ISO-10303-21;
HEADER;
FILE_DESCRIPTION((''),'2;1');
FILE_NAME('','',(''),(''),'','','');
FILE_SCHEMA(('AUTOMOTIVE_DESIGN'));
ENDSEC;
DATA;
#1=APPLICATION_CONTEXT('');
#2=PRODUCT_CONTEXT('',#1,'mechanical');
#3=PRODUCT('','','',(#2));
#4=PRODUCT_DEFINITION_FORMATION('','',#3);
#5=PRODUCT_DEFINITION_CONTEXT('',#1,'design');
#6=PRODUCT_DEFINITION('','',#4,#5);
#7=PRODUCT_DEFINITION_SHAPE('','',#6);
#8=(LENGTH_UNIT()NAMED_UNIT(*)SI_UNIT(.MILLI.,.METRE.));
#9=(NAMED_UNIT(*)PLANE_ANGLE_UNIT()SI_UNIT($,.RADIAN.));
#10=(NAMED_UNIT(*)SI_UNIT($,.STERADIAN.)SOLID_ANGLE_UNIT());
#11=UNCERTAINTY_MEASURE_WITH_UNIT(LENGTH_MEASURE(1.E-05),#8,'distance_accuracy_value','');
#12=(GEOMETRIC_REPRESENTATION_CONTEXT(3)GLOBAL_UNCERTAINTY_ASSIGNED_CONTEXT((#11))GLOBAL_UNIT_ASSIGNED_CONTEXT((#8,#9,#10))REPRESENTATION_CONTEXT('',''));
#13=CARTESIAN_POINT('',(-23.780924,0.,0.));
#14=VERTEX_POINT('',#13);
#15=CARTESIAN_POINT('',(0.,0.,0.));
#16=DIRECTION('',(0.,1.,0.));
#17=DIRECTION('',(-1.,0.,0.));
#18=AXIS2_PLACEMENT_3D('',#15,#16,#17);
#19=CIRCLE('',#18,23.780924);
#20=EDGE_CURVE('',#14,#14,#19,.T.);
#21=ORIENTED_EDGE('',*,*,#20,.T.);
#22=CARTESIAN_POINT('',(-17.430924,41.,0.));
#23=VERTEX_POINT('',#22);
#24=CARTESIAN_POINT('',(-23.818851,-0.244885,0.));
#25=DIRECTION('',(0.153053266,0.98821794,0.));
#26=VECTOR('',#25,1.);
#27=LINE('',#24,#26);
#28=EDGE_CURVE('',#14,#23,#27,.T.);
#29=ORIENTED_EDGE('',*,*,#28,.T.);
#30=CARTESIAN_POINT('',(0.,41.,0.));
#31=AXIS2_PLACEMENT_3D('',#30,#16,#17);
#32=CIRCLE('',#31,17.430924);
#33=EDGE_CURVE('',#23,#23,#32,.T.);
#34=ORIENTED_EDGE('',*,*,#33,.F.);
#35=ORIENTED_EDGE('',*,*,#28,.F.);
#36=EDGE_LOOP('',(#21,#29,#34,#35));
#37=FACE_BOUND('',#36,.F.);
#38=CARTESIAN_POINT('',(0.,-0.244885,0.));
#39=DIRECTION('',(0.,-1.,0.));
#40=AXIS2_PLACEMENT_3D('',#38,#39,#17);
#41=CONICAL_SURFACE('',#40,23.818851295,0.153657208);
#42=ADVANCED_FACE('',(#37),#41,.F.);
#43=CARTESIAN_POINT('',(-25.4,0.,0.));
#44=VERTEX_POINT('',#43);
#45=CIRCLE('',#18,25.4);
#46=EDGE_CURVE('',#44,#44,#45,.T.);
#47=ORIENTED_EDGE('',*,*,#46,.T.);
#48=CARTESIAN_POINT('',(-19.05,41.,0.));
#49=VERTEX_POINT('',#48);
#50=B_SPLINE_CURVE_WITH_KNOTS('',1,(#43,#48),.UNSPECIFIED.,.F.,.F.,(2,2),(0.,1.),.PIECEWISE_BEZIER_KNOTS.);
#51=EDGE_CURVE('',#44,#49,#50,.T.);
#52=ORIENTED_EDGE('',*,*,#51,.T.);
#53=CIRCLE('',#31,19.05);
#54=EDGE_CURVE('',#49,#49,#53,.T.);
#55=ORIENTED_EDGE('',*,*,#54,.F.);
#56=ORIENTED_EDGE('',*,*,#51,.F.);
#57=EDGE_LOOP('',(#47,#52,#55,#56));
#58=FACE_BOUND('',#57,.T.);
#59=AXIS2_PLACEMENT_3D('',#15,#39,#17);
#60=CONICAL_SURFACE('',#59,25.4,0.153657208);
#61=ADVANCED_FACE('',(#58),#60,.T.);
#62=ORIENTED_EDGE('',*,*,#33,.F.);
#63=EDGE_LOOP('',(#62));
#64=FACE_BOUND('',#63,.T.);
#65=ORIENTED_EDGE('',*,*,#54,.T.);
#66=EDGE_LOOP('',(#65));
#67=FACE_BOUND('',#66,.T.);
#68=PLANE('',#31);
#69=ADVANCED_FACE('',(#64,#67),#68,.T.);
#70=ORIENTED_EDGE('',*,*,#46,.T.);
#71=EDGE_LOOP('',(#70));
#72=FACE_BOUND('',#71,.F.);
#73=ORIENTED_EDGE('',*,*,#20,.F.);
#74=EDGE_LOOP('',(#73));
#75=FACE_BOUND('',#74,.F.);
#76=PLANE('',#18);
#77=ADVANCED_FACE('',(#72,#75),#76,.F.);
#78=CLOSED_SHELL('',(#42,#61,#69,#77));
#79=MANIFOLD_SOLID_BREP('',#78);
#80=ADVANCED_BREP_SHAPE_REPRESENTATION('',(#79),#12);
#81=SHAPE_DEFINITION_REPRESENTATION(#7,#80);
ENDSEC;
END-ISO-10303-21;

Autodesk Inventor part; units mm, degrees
ref_plane "YZ Plane" through (0, 0, 0) normal (1, 0, 0) x (0, 1, 0)
ref_plane "XY Plane" through (0, 0, 0) normal (0, 0, 1) x (1, 0, 0)
sketch "Szkic6" plane through (0, 0, 0) normal (0, 1, 0) x (-1, 0, 0)
  circle A0 centre (0, 0) radius 25.4
  dimension "d33" = 50.8
ref_plane "Płaszczyzna konstrukcyjna1" through (0, 41, 0) normal (0, 1, 0) x (-1, 0, 0)
sketch "Szkic7" plane through (0, 41, 0) normal (0, 1, 0) x (-1, 0, 0)
  circle A0 centre (0, 0) radius 19.05
  dimension "d35" = 38.1
loft "Wyciągnięcie złożone1" add profiles "Szkic6", "Szkic7"
shell "Skorupa1" thickness 1.6 removed faces 2 at (5.6226, 41, 0.0883) at (7.2508, 0, -1.9085)
equation "\"d33\" = OD1"
equation "\"d35\" = OD2"
equation "\"d52\" = THK"
equation "\"SzerokośćGięciaPodcięcia\" = Grubość"
equation "\"RozmiarPodcięciaNarożnika\" = 4 * Grubość"
equation "\"PromieńPrzejścia\" = PromieńGięcia"
equation "\"Rozmiar_promienia_Jacobiego\" = PromieńGięcia"
equation "\"Wielk_odstępu\" = Grubość"
equation "\"d2\" = PromieńGięcia"
equation "\"d23\" = PromieńGięcia"
equation "\"OD1\" = 50.8"
equation "\"OD2\" = 38.1"
equation "\"L\" = 41"
equation "\"THK\" = 1.6"
equation "\"d34\" = L"
equation "\"Grubość\" = 1.5"
equation "\"PromieńGięcia\" = 3"
properties part number "Redukcja symetryczna Ø50,8x38,1x1,6 L=41" material "304"
